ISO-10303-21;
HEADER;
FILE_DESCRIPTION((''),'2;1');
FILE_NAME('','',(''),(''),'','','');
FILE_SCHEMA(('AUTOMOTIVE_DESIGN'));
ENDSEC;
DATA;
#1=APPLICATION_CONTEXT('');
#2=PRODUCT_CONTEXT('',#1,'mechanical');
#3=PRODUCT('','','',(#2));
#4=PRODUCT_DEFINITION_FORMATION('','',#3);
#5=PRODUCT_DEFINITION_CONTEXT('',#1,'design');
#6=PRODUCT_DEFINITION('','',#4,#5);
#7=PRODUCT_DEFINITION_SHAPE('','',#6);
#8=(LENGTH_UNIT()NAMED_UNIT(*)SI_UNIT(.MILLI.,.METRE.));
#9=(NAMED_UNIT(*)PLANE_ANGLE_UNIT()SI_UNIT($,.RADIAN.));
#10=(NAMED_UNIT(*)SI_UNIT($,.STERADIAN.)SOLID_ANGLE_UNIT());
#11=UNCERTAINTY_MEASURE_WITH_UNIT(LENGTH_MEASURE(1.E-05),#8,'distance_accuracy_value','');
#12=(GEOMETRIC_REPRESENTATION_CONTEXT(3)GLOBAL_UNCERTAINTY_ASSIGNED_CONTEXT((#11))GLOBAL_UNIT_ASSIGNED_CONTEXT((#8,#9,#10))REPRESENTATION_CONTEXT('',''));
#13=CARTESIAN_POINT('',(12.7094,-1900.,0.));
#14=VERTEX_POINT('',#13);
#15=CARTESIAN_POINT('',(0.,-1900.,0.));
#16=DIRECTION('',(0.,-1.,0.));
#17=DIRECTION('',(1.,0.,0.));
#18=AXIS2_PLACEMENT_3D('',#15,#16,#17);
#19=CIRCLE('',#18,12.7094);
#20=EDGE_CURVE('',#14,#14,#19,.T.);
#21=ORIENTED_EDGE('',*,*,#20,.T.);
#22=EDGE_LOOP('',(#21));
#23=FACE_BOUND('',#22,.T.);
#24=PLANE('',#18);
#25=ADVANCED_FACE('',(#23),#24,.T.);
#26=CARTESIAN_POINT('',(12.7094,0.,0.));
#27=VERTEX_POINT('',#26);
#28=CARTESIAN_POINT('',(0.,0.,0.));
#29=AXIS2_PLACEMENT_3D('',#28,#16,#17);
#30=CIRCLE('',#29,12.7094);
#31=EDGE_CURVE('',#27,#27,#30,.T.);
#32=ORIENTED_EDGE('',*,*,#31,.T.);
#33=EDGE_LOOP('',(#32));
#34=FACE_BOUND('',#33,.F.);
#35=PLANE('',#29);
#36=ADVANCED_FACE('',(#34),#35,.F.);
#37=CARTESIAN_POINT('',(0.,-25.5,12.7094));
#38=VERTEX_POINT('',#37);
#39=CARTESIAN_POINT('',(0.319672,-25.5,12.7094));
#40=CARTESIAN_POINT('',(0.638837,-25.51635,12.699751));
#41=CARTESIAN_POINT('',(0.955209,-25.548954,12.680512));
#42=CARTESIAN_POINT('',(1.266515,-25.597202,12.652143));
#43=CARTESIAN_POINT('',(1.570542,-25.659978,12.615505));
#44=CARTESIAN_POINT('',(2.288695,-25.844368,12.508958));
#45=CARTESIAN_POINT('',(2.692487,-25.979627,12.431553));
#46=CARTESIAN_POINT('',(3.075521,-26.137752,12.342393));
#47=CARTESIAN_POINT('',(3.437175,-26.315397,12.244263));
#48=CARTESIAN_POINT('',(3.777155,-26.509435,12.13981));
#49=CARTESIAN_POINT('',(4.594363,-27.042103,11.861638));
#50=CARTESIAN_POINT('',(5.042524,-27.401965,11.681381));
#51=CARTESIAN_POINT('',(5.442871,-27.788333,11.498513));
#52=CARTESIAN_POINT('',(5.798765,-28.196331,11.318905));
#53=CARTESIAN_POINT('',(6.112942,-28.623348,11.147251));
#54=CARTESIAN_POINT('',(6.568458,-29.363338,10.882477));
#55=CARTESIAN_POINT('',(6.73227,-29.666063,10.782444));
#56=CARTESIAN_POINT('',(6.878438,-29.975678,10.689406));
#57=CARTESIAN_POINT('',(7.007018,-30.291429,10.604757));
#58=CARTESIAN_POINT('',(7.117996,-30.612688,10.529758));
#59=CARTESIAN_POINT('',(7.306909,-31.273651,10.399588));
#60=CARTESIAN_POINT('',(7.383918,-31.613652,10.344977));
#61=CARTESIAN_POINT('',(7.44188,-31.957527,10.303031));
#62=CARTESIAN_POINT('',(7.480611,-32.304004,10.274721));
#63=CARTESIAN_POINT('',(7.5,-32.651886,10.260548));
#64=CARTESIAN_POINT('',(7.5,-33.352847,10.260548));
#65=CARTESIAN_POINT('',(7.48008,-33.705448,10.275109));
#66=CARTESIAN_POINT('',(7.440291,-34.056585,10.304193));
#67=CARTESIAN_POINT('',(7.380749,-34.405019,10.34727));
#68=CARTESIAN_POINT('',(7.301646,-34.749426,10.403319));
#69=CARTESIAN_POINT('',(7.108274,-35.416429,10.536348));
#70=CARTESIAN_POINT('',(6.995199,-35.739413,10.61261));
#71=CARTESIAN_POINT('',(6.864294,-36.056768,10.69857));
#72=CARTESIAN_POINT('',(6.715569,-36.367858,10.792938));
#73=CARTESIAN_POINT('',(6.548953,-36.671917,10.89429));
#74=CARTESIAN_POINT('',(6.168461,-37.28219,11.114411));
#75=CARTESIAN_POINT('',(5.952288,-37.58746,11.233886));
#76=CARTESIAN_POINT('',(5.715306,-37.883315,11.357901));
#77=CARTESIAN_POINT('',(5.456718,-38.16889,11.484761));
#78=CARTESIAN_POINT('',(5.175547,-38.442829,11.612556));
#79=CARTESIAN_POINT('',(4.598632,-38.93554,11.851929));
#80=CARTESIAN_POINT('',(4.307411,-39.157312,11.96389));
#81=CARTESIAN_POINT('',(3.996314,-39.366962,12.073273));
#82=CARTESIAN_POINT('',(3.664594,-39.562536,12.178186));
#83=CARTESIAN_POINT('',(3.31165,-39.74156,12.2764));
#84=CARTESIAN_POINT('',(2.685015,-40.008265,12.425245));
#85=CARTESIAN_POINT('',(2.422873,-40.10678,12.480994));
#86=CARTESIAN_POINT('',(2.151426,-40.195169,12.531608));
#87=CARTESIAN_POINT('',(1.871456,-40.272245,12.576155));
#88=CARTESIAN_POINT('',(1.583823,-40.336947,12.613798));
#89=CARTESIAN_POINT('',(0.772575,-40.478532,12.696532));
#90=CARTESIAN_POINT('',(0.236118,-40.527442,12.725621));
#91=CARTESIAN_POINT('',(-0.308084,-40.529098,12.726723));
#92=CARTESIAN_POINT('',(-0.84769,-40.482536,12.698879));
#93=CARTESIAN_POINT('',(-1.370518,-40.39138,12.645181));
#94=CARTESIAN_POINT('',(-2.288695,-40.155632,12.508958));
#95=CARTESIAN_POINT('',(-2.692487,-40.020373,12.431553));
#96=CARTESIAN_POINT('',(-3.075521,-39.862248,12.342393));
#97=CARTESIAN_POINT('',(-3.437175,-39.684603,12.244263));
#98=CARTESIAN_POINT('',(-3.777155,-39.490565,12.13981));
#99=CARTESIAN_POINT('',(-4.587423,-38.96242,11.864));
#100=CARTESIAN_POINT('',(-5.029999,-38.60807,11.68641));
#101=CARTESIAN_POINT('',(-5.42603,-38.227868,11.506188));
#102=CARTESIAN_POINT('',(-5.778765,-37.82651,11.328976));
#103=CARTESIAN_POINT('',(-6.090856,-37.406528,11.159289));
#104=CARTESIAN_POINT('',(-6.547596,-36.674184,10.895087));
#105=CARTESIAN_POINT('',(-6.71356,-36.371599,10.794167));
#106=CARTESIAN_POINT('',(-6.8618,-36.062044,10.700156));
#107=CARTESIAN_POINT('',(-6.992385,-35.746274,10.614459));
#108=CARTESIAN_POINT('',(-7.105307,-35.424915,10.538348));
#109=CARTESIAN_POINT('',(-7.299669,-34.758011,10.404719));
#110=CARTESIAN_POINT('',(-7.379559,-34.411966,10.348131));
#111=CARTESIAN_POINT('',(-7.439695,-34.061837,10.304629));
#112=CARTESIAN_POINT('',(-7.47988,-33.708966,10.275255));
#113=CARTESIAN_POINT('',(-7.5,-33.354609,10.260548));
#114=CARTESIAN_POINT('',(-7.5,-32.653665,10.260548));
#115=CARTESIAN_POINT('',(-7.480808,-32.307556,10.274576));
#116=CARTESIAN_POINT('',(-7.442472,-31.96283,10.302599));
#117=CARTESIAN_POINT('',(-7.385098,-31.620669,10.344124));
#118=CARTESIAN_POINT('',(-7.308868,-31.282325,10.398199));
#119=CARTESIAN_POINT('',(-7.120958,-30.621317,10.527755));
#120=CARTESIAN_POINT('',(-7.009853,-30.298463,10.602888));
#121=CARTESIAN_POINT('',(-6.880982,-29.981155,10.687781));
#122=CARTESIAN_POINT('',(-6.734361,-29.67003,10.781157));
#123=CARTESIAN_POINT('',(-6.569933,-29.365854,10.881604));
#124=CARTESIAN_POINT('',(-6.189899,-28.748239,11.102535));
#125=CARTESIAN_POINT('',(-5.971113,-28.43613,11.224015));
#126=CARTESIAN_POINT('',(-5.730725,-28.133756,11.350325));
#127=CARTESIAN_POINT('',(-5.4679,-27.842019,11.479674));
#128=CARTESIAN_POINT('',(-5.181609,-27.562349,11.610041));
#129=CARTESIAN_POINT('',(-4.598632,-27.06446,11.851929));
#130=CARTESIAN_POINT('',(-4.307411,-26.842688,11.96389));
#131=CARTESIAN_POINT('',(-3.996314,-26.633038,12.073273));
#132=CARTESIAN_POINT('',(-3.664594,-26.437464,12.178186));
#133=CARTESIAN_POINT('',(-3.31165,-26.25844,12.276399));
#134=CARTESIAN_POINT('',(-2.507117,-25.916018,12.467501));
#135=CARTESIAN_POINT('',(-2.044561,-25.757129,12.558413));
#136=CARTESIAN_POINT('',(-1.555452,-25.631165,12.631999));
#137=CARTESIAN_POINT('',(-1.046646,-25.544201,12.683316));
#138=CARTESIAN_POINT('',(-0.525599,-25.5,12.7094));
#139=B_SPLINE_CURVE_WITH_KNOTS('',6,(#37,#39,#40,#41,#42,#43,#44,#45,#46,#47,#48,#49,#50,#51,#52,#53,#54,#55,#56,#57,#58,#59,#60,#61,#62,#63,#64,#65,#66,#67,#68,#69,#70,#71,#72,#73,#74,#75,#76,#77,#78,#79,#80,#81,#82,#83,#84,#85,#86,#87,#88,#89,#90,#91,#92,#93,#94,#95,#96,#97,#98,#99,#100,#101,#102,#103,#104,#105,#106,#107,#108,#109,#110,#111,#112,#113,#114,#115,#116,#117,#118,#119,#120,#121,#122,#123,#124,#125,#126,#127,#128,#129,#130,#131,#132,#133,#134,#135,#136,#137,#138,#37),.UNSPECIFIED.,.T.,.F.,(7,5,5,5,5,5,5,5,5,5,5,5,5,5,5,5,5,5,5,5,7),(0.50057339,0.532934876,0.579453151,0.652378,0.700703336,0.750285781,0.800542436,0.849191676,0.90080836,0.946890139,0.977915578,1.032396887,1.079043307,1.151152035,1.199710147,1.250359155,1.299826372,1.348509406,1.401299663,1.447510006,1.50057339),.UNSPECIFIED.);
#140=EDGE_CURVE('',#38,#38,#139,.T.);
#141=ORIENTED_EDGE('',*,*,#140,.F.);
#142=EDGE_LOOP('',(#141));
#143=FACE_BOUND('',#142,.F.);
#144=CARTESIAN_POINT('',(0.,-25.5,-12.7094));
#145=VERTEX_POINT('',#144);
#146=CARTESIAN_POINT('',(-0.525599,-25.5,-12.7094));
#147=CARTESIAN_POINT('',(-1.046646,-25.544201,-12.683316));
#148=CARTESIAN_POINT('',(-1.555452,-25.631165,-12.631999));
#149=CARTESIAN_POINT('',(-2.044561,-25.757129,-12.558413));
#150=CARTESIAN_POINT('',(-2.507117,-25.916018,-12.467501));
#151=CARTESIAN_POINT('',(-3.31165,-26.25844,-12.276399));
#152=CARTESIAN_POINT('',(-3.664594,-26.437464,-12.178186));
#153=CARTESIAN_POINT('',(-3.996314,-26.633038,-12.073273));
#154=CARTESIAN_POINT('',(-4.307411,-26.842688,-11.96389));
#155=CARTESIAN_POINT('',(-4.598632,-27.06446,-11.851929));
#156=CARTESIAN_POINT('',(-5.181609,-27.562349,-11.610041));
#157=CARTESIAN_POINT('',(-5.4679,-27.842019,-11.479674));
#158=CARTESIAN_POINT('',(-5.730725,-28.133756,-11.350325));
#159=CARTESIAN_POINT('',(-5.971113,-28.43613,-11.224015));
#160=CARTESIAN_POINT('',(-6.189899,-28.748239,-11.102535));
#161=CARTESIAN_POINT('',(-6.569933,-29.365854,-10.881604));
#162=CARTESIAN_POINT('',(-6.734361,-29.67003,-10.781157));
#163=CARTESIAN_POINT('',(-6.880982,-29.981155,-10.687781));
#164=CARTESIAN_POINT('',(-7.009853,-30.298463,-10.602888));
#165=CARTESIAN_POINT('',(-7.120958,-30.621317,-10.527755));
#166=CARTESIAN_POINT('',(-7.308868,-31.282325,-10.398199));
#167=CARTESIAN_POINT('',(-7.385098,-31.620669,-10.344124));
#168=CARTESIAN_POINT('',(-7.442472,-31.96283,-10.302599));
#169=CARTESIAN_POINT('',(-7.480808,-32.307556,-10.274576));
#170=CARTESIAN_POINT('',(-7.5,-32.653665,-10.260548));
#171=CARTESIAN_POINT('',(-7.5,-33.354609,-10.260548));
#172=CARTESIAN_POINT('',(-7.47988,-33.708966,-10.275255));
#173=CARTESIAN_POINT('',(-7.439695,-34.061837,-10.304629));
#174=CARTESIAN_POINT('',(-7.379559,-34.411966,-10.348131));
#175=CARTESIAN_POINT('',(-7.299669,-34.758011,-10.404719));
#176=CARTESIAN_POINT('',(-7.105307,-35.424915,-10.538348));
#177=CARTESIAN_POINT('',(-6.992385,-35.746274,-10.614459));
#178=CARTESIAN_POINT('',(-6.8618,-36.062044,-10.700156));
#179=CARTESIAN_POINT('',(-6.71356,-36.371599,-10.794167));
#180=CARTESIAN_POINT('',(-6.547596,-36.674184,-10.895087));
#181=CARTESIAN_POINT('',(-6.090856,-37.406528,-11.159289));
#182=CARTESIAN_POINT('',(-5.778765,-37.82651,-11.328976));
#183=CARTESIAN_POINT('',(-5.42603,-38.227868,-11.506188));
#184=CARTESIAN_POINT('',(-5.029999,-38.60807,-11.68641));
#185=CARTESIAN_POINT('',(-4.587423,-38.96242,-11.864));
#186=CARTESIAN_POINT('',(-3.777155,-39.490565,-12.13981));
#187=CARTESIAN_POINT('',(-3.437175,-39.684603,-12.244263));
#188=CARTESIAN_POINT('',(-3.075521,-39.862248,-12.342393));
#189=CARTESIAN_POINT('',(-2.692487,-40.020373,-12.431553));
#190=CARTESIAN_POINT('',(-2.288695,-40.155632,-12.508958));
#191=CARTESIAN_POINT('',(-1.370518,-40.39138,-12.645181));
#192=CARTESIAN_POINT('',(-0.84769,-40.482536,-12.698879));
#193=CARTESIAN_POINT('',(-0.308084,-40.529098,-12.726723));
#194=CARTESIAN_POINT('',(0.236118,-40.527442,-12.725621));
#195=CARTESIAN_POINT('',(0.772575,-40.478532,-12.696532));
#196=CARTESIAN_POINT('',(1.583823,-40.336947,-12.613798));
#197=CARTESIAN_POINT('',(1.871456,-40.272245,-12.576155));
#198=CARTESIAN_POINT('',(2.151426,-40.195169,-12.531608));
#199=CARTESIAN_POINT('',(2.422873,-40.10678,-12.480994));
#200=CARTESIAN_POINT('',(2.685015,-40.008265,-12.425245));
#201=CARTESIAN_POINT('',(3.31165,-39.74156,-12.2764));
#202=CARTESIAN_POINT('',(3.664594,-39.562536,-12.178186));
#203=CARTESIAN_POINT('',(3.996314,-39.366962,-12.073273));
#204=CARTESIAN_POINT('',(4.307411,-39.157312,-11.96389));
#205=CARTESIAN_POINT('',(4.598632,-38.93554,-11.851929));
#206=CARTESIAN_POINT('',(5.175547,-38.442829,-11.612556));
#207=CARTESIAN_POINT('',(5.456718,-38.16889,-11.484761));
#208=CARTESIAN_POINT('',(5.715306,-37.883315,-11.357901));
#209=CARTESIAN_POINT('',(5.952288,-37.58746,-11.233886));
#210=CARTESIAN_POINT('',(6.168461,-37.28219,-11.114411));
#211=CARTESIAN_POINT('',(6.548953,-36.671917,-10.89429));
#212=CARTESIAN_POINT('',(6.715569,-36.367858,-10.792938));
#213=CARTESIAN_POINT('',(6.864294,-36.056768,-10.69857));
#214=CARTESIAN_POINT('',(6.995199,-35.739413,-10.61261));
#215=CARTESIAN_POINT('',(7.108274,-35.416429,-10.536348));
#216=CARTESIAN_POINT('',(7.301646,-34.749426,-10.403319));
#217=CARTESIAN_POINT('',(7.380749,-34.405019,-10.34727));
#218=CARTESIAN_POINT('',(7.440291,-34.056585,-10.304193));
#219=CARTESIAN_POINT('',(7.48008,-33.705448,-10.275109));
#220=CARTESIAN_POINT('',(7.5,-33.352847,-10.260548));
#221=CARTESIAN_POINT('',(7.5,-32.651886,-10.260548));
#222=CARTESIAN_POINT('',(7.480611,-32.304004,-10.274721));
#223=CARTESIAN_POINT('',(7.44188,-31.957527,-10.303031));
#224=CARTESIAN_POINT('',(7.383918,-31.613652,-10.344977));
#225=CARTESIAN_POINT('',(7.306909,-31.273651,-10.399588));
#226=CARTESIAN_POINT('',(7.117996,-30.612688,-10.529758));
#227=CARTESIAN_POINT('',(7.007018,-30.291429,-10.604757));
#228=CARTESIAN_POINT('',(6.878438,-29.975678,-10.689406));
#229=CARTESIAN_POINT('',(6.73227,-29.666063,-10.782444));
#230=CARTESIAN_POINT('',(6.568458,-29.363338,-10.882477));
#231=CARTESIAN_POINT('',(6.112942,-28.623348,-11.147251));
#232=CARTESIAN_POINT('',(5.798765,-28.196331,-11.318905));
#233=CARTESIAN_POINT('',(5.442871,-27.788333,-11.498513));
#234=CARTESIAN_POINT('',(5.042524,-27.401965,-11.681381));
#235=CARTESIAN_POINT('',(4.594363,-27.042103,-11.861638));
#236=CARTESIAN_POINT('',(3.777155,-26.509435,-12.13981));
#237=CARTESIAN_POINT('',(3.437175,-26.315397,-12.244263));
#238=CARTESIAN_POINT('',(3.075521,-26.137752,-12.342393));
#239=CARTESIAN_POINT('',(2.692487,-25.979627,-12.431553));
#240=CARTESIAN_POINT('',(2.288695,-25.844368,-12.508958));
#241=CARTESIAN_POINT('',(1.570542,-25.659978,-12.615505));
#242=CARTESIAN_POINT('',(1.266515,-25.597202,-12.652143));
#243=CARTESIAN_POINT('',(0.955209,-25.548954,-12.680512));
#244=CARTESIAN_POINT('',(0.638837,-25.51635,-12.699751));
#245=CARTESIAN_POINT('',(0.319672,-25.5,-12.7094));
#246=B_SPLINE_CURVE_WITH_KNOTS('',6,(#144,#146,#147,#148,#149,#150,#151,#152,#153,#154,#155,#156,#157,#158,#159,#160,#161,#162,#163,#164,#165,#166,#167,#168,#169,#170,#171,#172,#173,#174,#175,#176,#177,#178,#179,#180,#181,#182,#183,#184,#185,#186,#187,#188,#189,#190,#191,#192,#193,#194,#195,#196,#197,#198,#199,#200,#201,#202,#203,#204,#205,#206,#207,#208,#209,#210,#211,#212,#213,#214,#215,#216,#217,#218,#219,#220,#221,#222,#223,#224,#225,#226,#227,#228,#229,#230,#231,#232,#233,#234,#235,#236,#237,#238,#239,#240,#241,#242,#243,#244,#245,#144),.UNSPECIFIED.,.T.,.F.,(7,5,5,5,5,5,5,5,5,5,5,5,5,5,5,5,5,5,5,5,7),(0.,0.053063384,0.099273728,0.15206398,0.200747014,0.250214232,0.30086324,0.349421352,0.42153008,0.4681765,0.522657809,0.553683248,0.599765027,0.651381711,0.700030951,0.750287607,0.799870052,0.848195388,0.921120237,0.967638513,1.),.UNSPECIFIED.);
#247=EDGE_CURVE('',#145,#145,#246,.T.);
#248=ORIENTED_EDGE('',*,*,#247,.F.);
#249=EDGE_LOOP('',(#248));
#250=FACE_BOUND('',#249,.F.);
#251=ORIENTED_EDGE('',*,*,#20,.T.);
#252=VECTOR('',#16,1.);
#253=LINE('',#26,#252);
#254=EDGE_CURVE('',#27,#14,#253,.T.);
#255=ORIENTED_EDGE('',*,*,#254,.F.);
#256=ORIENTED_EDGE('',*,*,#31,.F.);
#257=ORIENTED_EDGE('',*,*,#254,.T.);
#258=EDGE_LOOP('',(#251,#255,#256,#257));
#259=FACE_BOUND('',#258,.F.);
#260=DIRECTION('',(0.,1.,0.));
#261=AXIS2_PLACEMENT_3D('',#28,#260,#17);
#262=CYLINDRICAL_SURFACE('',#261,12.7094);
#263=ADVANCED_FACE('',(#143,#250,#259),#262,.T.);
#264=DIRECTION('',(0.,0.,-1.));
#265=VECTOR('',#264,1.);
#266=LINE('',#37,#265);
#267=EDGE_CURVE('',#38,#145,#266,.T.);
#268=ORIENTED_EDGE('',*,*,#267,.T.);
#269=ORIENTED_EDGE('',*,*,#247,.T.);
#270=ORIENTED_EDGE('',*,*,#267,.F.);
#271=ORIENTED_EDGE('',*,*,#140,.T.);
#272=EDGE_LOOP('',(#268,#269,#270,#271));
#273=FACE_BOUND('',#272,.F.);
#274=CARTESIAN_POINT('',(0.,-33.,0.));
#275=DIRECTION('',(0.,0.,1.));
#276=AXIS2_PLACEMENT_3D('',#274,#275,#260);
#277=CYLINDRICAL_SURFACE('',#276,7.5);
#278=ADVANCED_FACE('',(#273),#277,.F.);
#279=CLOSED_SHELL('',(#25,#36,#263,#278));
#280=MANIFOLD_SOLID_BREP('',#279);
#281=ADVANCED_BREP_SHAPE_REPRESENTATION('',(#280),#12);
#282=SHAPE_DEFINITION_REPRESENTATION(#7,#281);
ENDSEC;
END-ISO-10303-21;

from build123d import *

# Parameters (mm, degrees)
F1_R          = 12.7094
F3_DEPTH      = 1900
F4_DEPTH      = 12.7094
F4_DEPTH_BACK = 12.7094


with BuildPart() as f3:
    # F1 (on Front) → F3 (new body)
    with BuildSketch(Plane.XZ):
        Circle(F1_R)
    extrude(amount=F3_DEPTH)

    # F2 (on Top) → F4 (cut, two sides)
    with BuildSketch(Plane.XY) as f4_sk:
        with BuildLine():
            ThreePointArc((7.5, -33), (5.3033008589, -27.6966991411), (0, -25.5))
            Line((0, -25.5), (0, -33))
            Line((0, -33), (0, -40.5))
            ThreePointArc((0, -40.5), (5.3033008589, -38.3033008589), (7.5, -33))
        make_face()
        with BuildLine():
            Line((0, -33), (0, -25.5))
            ThreePointArc((0, -25.5), (-7.5, -33), (0, -40.5))
            Line((0, -40.5), (0, -33))
        make_face()
    extrude(amount=-F4_DEPTH, mode=Mode.SUBTRACT)
    extrude(f4_sk.sketch, amount=F4_DEPTH_BACK, mode=Mode.SUBTRACT)


solid = f3.part
